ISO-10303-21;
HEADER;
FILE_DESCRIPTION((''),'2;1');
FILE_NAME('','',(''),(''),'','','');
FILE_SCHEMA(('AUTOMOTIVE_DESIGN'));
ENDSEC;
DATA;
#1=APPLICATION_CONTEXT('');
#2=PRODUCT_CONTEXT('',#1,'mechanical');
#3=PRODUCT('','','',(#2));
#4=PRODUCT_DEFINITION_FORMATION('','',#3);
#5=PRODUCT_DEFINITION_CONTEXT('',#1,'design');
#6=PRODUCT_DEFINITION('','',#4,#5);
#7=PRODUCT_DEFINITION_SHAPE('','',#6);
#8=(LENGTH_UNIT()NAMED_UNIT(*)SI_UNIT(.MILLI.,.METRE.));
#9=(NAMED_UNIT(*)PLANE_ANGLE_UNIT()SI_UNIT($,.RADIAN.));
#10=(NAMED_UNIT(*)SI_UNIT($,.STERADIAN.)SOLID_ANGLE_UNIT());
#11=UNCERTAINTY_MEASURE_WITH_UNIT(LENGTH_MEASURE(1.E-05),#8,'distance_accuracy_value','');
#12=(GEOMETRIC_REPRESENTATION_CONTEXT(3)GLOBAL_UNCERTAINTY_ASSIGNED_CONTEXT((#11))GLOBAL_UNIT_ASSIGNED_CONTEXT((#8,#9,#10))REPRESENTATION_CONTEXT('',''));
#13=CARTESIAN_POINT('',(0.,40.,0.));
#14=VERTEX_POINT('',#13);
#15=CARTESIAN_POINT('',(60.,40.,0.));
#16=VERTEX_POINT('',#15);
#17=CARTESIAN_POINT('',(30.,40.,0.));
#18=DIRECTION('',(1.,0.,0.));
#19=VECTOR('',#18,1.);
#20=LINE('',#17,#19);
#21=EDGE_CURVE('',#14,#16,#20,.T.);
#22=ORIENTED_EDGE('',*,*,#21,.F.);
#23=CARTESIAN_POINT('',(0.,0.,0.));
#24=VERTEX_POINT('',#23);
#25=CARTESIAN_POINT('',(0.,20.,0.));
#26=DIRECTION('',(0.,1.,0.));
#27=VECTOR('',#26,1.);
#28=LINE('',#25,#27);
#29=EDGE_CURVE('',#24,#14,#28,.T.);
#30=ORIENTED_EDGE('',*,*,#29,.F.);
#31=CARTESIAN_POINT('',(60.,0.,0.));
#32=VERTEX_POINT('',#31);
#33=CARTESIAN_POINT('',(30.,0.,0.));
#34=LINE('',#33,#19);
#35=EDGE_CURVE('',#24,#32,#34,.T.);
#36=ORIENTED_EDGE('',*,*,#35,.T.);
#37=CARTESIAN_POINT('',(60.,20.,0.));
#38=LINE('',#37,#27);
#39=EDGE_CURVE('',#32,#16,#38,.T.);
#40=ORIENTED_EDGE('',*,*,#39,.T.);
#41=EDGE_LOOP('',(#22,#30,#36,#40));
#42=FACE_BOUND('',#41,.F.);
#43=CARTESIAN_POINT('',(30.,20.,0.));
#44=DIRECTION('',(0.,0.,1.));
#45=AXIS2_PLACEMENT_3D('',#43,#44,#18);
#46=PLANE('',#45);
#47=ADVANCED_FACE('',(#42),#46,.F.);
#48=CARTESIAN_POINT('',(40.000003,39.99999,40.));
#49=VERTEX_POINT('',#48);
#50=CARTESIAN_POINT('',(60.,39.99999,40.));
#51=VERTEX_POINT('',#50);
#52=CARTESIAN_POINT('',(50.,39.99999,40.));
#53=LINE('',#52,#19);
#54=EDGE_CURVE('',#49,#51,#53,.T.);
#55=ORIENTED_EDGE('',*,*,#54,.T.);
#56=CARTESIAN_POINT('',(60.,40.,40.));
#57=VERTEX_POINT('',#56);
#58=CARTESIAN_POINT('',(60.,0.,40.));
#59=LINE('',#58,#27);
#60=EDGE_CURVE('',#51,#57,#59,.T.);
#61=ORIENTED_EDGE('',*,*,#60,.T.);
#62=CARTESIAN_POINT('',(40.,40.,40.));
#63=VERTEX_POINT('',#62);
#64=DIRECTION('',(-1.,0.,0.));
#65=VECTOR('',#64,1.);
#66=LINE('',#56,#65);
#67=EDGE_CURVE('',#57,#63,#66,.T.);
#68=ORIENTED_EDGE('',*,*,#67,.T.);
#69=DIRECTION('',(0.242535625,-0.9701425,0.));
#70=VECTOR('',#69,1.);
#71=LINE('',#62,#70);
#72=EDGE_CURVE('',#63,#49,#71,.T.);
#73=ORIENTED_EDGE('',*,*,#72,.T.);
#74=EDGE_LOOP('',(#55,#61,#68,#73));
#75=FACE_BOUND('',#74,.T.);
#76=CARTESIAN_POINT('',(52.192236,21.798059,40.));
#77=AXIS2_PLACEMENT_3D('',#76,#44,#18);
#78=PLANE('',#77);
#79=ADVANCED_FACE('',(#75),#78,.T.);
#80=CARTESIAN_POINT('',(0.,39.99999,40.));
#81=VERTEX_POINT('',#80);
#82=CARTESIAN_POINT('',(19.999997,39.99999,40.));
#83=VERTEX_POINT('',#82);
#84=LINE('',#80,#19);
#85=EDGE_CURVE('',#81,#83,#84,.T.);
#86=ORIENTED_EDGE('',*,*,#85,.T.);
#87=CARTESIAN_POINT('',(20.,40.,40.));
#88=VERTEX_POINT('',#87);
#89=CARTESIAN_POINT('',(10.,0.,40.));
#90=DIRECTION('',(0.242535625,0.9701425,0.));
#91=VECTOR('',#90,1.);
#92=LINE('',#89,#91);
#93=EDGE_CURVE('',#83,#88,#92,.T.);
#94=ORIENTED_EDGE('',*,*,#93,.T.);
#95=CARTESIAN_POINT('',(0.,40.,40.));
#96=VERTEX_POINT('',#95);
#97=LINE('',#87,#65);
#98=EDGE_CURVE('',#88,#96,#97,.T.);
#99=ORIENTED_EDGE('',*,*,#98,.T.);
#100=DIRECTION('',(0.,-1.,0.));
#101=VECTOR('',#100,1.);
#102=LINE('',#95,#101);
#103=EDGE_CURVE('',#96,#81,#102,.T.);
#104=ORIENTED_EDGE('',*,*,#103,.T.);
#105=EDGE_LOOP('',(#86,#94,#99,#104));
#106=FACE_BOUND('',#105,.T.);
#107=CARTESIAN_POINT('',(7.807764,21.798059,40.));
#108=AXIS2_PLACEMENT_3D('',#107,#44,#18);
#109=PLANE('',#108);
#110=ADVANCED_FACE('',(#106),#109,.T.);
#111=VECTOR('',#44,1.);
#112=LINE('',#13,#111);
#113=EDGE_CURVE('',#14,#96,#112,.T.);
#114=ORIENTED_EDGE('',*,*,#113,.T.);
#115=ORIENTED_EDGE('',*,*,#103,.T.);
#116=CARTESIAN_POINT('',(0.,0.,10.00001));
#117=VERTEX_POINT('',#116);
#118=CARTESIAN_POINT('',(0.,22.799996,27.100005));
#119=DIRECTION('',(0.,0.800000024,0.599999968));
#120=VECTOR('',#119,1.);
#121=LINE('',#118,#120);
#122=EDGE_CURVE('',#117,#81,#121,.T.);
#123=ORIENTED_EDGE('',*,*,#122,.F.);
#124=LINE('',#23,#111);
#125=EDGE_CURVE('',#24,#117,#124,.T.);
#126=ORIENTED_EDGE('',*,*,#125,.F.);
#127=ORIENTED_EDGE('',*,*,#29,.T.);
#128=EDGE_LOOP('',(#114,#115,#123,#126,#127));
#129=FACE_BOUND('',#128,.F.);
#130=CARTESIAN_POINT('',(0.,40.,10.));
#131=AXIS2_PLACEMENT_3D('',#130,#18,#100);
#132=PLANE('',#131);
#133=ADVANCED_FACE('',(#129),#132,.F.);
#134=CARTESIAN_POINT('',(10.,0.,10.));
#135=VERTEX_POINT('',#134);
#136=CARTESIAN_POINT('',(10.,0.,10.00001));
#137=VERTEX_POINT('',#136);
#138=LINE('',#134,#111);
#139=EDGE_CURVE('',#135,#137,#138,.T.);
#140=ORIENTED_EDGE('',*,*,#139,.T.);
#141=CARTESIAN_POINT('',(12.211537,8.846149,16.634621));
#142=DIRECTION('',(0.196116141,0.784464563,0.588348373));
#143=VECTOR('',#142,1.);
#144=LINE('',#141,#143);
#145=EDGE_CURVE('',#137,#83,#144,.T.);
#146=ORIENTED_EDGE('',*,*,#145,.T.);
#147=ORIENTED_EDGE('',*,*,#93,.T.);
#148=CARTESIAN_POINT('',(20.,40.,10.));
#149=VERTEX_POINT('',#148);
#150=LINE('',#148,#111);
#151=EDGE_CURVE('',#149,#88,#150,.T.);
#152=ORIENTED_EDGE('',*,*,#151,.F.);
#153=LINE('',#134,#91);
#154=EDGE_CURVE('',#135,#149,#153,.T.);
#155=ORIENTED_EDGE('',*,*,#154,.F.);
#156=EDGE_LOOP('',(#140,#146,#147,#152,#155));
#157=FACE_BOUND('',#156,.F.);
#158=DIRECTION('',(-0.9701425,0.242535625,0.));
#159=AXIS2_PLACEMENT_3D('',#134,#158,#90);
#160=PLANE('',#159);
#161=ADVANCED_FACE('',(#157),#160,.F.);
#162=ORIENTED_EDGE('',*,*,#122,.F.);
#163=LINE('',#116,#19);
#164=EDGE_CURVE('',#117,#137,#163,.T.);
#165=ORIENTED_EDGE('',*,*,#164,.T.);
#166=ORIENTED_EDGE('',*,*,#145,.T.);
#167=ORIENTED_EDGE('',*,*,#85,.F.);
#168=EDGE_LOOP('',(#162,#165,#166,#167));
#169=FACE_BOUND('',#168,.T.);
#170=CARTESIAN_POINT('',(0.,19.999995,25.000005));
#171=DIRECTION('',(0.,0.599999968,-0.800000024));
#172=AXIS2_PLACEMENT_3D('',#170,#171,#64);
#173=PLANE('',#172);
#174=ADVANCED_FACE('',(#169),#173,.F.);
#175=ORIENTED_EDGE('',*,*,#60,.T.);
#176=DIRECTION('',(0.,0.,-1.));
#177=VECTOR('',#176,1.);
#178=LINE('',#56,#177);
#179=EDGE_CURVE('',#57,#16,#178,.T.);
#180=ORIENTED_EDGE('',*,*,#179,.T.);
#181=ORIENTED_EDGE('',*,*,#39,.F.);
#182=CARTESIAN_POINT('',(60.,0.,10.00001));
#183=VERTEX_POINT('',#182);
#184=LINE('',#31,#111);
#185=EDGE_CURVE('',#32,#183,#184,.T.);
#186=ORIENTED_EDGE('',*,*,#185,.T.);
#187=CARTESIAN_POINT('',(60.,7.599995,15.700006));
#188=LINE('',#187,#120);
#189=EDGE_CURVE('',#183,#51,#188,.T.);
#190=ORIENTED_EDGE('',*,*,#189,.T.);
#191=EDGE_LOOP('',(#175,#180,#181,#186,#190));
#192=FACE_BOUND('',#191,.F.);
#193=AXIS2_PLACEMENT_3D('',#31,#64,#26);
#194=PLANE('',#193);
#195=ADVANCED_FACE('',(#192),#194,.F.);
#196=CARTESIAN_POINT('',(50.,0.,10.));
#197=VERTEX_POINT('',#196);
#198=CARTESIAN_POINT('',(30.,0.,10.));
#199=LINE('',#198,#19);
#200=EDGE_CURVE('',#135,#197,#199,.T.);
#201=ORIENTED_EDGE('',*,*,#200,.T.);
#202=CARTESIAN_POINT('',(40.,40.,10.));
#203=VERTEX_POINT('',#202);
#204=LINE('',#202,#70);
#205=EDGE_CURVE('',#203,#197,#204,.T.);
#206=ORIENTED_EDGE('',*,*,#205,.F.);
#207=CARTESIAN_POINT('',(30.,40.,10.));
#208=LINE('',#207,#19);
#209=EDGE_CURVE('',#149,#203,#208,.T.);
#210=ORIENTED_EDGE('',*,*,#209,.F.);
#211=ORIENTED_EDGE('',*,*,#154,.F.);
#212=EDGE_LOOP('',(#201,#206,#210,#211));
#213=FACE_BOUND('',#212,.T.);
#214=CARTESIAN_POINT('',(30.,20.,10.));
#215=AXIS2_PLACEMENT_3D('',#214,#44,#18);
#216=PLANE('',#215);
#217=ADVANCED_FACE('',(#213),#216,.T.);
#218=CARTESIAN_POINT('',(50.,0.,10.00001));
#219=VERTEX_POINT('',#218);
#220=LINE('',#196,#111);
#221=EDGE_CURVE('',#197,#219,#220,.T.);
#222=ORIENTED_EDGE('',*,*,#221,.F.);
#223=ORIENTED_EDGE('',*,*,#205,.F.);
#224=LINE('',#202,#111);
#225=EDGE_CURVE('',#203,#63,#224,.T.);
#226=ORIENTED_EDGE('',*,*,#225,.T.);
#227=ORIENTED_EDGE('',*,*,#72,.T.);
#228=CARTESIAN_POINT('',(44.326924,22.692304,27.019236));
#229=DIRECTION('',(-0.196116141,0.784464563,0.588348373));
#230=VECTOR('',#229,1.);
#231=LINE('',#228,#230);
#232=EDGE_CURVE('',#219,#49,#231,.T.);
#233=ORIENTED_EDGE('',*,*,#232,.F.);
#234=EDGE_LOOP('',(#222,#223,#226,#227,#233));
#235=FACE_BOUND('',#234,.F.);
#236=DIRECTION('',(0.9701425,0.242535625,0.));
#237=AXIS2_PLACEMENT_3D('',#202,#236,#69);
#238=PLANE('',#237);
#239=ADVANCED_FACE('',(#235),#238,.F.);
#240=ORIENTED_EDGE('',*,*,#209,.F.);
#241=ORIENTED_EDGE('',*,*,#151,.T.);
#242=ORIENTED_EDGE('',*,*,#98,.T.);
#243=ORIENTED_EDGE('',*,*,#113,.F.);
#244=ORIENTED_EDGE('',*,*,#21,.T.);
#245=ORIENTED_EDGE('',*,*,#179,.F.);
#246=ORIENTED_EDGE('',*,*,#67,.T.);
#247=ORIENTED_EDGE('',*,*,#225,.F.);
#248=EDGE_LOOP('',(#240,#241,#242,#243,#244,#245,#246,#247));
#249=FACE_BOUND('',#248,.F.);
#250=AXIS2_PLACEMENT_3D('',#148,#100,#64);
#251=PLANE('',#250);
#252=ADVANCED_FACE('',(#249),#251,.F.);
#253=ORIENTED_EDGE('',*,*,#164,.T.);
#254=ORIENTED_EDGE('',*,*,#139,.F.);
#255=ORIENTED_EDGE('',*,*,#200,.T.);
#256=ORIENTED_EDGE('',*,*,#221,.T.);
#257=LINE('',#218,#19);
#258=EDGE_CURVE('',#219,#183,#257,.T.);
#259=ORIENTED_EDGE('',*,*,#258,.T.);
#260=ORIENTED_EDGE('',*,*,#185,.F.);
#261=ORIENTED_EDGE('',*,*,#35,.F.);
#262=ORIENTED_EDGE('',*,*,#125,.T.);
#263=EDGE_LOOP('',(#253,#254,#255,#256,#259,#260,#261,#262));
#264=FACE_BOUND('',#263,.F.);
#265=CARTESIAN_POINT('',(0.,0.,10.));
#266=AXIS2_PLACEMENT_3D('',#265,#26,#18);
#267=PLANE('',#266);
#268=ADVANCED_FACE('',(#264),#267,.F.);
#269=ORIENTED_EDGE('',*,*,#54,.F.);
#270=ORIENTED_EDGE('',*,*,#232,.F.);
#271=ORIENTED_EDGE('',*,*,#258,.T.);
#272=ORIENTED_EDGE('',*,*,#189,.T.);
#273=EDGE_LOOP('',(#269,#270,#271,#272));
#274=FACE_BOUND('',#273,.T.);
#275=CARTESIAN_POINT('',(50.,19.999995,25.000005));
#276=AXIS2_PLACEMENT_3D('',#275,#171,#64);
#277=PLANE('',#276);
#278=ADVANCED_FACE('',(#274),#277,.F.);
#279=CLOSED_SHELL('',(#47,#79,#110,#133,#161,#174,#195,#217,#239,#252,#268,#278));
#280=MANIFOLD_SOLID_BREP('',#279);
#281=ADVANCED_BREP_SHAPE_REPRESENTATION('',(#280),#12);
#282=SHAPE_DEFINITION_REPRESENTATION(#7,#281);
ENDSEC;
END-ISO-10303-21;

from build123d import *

# Parameters (mm, degrees)
F0_W     = 60
F0_H     = 40
F1_DEPTH = 10
F3_DEPTH = 30
F4_SIZE2 = 39.99999
F4_SIZE  = 29.99999


# Not quite as in the source:
# - a fillet or chamfer is up to 0.001 mm smaller than in the source, because OpenCascade refuses the exact size


with BuildPart() as f1:
    # F0 (on Top) → F1 (new body)
    with BuildSketch(Plane.XY):
        with Locations((30, 20)):
            Rectangle(F0_W, F0_H)
    extrude(amount=F1_DEPTH)

    # F2 (on face) → F3 (join)
    with BuildSketch(Plane.XY.offset(10)):
        Polygon((20, 40), (0, 40), (0, 0), (10, 0), align=None)
        Polygon((60, 0), (60, 40), (40, 40), (50, 0), align=None)
    extrude(amount=F3_DEPTH)

    # F4 (size 30 and 40 in the source; OpenCascade refuses exactly that, so slightly less here)
    f4_edges = [f1.edges().sort_by_distance(p)[0] for p in [
        (55, 0, 40),
        (5, 0, 40),
    ]]
    f4_side = f1.faces().sort_by_distance((0.72111, 0, 20))[0]
    chamfer(f4_edges, length=F4_SIZE, length2=F4_SIZE2, reference=f4_side)


solid = f1.part
